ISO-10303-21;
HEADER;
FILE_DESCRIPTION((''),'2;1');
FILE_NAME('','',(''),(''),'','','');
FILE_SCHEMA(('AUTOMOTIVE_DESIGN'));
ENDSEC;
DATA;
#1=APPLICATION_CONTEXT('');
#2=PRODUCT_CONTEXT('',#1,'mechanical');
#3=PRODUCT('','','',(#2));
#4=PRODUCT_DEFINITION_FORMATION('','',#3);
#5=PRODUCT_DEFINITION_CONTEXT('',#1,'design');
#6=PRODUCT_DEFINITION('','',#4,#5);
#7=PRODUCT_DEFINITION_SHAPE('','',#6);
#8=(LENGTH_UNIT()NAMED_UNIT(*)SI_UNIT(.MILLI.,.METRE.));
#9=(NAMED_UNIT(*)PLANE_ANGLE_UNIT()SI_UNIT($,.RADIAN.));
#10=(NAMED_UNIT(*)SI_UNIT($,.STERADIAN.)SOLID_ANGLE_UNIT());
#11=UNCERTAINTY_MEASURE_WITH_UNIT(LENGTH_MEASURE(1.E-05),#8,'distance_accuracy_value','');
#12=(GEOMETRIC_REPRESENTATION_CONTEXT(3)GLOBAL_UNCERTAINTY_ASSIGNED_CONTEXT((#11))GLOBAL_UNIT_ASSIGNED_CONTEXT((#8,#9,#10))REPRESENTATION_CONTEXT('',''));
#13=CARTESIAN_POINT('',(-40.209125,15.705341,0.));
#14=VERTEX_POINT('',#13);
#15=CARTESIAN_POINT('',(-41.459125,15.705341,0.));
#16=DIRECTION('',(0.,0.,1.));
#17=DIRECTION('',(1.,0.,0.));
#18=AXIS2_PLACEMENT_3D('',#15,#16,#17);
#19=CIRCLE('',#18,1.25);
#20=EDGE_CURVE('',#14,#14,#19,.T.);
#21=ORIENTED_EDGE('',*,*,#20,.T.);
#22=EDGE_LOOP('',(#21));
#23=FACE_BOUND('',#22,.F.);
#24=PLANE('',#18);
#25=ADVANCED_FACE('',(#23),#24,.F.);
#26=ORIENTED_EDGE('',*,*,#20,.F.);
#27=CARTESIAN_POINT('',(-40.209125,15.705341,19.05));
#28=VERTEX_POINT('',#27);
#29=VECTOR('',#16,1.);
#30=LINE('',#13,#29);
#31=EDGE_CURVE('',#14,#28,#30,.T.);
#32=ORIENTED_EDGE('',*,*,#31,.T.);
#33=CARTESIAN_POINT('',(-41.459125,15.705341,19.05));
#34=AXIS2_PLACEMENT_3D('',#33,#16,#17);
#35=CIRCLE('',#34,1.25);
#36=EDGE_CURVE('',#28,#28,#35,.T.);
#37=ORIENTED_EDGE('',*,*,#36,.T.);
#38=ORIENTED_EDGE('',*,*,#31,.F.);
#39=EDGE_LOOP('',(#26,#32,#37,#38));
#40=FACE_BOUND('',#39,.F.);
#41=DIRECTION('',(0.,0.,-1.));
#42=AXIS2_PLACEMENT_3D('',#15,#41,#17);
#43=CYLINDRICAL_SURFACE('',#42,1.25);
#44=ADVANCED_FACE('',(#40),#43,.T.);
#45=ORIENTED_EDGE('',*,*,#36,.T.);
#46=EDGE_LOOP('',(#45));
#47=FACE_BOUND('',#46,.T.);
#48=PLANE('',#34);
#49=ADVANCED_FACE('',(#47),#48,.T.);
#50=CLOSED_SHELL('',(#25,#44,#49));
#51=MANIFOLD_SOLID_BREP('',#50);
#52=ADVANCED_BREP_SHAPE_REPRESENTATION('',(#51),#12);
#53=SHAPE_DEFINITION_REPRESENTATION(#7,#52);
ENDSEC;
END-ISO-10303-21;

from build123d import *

# Parameters (mm, degrees)
F0_R     = 1.25
F1_DEPTH = 19.05


# Not quite as in the source:
# - a length typed as a fraction of an inch, garbled in the dataset ("3 / 203.2 mm" for 3/8 in), is restored


with BuildPart() as f1:
    # F0 (on Top) → F1 (new body)
    with BuildSketch(Plane.XY):
        with Locations((-41.4591245353, 15.7053414732)):
            Circle(F0_R)
    extrude(amount=F1_DEPTH)


solid = f1.part
